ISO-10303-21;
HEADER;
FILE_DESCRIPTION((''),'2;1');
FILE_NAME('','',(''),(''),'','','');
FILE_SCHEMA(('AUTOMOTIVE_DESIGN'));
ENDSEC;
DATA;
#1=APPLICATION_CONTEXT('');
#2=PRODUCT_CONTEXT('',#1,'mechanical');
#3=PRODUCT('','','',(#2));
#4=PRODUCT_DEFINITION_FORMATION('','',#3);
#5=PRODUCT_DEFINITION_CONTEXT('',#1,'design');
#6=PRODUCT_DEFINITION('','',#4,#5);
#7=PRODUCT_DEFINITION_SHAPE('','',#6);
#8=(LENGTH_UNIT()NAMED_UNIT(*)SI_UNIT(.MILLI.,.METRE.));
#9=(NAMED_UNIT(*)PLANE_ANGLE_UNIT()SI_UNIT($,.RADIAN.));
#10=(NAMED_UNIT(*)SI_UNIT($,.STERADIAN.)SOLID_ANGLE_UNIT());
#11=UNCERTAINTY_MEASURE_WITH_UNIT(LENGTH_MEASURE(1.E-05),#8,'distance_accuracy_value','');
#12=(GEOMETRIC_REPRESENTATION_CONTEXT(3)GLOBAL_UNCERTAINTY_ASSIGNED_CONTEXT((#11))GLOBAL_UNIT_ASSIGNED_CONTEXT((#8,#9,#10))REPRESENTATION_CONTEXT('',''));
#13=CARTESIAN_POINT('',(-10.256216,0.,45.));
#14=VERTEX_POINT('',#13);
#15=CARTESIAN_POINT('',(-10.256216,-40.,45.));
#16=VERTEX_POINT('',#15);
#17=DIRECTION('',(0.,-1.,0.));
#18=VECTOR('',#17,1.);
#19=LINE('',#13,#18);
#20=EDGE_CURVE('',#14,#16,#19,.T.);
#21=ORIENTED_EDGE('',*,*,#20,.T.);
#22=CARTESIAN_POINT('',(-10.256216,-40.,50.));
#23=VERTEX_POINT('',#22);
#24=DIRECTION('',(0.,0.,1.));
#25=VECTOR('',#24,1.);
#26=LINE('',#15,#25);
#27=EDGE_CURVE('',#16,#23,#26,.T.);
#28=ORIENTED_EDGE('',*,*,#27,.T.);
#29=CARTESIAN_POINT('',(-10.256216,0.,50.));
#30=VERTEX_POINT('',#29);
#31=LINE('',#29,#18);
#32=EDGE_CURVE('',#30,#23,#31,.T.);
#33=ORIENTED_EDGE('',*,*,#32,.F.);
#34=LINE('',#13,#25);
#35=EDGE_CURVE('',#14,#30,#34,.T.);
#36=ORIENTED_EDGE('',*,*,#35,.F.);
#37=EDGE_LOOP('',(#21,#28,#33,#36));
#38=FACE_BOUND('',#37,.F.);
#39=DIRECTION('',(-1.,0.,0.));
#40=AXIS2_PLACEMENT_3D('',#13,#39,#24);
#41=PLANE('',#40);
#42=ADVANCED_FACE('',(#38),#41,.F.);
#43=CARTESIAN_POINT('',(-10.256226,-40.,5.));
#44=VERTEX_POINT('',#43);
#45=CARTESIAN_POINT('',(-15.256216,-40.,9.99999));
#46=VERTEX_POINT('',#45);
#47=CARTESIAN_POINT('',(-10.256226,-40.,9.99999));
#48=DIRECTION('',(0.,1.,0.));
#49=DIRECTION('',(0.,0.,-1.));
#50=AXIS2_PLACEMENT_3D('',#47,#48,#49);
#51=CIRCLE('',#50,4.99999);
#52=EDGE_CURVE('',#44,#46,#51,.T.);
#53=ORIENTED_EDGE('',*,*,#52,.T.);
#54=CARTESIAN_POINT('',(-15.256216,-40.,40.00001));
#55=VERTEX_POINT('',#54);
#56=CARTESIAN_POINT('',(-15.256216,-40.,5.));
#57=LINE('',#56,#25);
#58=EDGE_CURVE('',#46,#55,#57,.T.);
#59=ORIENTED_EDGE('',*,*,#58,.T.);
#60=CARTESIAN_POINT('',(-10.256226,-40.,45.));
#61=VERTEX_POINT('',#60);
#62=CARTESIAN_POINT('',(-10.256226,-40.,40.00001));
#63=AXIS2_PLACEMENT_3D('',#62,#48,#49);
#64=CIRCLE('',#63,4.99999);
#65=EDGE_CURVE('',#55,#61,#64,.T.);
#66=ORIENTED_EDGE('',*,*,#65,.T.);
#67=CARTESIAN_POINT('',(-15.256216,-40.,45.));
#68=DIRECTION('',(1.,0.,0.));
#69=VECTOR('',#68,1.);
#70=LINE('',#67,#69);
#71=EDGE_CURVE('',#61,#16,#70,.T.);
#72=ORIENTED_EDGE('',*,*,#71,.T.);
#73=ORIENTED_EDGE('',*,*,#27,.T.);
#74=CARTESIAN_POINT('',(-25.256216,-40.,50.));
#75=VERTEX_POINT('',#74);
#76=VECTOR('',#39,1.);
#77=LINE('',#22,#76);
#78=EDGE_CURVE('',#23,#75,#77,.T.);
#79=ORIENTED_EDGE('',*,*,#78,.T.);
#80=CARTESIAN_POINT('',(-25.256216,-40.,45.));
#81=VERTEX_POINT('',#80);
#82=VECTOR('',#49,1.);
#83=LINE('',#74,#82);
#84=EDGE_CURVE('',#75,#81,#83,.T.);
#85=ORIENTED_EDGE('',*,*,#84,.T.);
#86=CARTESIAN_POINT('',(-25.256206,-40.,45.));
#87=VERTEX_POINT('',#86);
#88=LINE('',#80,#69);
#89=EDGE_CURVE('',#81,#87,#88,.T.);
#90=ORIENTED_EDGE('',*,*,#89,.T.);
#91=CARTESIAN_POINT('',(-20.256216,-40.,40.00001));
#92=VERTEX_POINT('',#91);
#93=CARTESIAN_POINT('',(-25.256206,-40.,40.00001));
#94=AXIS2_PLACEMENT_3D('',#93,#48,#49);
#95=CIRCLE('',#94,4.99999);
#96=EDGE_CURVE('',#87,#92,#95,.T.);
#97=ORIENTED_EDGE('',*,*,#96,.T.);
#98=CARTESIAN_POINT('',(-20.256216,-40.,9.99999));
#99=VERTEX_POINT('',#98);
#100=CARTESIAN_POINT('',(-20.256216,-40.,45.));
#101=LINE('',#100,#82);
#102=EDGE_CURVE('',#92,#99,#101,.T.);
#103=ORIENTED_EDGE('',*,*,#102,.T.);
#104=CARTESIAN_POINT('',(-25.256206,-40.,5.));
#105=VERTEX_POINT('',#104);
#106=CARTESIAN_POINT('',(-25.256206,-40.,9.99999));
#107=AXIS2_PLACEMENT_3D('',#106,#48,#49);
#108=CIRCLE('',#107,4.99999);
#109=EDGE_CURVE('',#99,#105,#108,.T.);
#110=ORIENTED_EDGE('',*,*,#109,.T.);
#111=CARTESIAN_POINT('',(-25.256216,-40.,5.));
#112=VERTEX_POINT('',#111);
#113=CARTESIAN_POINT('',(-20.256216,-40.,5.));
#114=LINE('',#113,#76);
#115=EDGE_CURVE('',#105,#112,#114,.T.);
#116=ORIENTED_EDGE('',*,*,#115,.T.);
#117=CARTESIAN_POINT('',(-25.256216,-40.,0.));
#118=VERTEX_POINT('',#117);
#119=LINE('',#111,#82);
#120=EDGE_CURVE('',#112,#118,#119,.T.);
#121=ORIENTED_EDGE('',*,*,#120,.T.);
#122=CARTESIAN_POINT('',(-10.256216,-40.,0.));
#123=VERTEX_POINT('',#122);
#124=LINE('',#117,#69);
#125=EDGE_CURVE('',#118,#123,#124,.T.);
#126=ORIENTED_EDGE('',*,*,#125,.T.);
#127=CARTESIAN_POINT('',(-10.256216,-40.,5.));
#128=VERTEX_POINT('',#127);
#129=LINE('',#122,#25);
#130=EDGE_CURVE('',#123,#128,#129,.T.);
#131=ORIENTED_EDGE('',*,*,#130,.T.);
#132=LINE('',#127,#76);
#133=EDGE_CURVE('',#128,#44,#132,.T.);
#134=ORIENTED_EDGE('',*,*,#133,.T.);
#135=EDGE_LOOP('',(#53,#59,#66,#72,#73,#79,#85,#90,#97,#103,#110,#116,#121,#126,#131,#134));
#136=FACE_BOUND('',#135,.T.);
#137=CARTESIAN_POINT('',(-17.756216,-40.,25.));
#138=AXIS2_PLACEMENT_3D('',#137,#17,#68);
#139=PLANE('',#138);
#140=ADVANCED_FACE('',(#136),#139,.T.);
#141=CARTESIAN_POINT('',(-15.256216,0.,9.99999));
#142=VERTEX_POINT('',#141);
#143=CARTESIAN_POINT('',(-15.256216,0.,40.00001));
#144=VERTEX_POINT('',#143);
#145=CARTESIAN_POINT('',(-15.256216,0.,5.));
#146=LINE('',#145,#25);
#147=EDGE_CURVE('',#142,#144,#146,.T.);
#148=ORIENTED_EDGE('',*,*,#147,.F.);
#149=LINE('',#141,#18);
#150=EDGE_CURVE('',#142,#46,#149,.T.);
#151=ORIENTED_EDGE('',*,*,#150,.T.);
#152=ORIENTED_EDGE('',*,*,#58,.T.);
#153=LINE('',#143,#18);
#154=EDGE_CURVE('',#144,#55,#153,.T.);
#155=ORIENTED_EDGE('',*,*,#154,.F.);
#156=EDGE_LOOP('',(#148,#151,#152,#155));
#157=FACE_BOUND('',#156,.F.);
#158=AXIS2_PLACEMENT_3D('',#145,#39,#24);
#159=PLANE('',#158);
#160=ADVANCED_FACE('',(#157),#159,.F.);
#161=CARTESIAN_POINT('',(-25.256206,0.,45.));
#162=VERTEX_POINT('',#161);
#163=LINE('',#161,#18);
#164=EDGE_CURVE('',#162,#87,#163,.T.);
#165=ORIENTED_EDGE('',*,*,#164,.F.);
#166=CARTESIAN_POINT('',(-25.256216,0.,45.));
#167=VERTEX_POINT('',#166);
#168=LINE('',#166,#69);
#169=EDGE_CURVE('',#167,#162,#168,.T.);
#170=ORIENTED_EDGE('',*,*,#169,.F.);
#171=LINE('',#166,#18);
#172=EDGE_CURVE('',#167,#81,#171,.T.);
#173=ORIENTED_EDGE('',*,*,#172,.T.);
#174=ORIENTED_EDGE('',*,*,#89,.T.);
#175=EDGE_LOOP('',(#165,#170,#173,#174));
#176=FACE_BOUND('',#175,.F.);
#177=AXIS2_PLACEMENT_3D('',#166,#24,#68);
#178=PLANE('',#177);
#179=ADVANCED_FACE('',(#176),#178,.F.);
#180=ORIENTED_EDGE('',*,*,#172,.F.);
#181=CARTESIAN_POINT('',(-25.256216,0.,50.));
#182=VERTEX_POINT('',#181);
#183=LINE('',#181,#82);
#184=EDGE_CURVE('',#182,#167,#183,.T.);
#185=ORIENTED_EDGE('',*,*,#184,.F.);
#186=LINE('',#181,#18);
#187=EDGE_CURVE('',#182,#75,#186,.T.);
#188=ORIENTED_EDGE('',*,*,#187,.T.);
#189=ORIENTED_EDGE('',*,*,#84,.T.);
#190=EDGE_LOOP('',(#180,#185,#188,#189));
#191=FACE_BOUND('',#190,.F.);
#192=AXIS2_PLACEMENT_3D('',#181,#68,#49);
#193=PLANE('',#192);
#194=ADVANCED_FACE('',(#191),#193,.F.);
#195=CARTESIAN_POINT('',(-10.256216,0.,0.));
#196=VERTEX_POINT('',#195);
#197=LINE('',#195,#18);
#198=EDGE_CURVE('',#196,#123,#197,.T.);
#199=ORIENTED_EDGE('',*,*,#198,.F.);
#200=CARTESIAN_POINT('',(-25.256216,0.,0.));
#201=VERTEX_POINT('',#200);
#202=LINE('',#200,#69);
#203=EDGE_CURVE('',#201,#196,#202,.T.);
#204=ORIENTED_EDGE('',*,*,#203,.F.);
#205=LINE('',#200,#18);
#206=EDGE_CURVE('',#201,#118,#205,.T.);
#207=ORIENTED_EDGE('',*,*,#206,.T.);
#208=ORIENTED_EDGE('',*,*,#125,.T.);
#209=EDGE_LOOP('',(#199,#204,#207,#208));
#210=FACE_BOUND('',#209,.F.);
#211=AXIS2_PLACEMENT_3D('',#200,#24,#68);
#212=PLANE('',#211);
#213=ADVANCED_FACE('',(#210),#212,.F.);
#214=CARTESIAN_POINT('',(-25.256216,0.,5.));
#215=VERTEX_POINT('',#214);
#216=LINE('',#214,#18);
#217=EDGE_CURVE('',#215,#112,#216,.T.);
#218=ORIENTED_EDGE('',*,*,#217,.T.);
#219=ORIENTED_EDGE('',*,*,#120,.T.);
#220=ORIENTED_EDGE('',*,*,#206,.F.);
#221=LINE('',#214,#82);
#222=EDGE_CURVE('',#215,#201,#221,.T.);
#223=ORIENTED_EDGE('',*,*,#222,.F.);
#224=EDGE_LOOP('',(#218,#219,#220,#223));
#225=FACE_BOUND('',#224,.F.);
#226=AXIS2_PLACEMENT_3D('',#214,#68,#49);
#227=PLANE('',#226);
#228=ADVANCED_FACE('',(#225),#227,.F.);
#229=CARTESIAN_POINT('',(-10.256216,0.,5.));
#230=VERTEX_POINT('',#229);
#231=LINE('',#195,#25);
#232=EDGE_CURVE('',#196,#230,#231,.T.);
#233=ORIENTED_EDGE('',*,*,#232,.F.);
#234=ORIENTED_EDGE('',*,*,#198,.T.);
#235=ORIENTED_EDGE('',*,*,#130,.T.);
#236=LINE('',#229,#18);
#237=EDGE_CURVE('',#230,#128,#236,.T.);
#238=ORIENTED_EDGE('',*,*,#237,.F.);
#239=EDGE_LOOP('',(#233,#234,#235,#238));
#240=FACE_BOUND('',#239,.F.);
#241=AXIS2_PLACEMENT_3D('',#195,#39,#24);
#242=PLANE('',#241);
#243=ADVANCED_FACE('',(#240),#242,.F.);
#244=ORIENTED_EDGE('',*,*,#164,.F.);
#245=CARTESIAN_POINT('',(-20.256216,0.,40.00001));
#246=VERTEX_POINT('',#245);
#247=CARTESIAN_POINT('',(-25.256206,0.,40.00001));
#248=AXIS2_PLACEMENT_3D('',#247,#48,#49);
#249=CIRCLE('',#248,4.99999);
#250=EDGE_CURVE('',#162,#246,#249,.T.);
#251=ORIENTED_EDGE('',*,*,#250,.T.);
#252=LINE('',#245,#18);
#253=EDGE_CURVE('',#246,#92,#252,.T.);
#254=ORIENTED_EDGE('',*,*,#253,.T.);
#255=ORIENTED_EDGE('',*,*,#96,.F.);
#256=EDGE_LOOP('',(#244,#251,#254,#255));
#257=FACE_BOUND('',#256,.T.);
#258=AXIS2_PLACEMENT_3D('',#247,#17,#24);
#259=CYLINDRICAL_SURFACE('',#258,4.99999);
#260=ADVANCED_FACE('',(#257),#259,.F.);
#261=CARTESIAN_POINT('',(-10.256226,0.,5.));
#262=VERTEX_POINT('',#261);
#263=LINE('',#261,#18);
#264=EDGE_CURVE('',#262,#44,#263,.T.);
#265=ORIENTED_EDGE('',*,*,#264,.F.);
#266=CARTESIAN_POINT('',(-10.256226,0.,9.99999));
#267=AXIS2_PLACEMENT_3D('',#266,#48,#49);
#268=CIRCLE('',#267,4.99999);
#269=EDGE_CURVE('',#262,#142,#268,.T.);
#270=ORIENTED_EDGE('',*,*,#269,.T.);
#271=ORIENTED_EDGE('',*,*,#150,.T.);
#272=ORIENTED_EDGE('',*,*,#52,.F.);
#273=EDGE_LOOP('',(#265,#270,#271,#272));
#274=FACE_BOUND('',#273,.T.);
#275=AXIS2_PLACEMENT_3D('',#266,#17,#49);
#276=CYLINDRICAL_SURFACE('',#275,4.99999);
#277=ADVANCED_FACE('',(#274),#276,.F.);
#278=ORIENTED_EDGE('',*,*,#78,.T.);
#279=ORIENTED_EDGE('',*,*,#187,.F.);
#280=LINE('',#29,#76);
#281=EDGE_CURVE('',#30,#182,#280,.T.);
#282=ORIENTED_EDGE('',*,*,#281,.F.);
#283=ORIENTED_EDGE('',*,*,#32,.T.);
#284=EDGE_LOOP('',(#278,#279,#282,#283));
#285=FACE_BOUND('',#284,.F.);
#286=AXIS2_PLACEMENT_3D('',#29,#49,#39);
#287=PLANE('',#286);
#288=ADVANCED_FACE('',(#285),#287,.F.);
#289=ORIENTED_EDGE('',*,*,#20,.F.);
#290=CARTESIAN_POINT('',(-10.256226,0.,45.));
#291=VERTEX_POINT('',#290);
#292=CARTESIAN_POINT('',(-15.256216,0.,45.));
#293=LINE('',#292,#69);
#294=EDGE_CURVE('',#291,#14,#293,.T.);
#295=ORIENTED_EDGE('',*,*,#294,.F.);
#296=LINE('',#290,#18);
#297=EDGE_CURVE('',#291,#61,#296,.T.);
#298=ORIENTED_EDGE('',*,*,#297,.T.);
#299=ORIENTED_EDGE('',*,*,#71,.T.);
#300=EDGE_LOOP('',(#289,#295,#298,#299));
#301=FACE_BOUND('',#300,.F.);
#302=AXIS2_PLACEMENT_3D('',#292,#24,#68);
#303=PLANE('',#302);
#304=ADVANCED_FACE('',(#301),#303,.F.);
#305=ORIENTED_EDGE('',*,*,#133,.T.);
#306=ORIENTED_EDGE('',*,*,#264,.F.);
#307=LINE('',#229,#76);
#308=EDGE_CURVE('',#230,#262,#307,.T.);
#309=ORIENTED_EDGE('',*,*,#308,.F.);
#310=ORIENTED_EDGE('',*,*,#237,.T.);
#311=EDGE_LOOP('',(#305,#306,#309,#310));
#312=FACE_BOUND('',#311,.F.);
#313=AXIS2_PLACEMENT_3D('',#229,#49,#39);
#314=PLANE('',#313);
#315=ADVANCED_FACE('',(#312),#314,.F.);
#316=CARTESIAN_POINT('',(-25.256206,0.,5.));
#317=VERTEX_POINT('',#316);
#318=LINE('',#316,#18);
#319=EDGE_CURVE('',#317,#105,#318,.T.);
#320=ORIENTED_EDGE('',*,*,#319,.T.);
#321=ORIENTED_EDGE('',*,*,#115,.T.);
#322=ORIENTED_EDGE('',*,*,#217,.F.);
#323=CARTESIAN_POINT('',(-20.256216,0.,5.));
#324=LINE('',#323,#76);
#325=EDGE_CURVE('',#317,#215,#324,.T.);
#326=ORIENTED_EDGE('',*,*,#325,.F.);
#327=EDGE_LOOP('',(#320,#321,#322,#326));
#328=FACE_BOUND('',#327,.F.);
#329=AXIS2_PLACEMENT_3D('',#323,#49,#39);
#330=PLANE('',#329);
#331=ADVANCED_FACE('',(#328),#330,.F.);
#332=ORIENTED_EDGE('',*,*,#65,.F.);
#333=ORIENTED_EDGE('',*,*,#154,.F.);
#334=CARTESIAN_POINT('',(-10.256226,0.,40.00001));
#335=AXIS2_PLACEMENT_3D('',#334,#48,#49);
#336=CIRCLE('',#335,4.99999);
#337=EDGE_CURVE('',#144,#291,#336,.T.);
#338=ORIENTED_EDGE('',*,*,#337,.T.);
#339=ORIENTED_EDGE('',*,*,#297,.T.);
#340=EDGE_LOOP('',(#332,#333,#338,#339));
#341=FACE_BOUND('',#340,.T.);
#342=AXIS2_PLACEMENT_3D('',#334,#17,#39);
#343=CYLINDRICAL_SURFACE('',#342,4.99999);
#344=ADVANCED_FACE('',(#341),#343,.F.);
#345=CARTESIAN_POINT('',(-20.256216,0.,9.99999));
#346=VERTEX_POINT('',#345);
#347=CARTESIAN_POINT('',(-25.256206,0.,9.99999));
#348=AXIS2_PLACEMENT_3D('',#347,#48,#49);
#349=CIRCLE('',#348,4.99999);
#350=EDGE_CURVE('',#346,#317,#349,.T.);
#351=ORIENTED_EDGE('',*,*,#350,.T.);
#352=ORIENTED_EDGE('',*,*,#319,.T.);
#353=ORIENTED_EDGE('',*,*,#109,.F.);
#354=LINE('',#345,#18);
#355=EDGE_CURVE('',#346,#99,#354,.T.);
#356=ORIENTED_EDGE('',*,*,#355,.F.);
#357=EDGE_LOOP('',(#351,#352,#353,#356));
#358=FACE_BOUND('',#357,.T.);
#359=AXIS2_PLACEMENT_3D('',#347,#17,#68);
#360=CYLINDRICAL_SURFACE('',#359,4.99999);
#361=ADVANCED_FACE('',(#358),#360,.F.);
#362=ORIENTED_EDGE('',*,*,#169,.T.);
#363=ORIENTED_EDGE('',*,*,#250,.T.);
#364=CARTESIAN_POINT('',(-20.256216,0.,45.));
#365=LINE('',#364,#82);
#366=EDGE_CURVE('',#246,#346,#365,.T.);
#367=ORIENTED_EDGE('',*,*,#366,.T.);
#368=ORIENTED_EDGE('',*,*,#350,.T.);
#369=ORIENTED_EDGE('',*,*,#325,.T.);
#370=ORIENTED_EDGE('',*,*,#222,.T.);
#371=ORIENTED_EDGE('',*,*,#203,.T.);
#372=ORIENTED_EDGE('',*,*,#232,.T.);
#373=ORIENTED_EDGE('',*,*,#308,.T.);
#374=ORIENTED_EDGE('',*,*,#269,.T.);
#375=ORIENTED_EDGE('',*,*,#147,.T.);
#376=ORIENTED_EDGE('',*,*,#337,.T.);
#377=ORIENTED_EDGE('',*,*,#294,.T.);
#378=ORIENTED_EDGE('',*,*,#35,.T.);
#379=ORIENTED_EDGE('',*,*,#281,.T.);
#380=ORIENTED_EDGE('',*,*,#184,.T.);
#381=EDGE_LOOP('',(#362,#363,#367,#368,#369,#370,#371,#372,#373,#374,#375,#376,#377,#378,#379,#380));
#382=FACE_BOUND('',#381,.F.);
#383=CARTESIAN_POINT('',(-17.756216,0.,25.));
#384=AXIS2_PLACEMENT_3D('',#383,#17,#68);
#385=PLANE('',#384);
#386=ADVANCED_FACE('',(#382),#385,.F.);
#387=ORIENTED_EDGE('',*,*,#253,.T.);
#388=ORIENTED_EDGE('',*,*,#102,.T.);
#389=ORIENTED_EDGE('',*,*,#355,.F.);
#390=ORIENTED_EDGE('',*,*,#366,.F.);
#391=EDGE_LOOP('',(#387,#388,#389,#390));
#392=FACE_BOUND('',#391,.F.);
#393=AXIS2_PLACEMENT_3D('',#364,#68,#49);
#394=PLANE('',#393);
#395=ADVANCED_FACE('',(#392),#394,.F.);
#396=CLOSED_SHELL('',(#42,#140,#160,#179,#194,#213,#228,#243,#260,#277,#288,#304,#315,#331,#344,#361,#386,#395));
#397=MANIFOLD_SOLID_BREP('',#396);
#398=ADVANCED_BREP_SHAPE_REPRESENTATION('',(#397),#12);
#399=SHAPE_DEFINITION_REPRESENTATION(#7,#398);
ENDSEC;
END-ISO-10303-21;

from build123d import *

# Parameters (mm, degrees)
F1_DEPTH = 40
F2_R     = 4.99999


# Not quite as in the source:
# - a fillet or chamfer is up to 0.001 mm smaller than in the source, because OpenCascade refuses the exact size


with BuildPart() as f1:
    # F0 (on Front) → F1 (new body)
    with BuildSketch(Plane.XZ):
        Polygon((-10.2562157065, 50), (-25.2562157065, 50), (-25.2562157065, 45), (-20.2562157065, 45), (-20.2562157065, 5), (-25.2562157065, 5), (-25.2562157065, 0), (-10.2562157065, 0), (-10.2562157065, 5), (-15.2562157065, 5), (-15.2562157065, 45), (-10.2562157065, 45), align=None)
    extrude(amount=F1_DEPTH)

    # F2 (radius 5 in the source; OpenCascade refuses exactly that, so slightly less here)
    f2_edges = [f1.edges().sort_by_distance(p)[0] for p in [
        (-15.256216, -20, 5),
        (-20.256216, -20, 5),
        (-15.256216, -20, 45),
        (-20.256216, -20, 45),
    ]]
    fillet(f2_edges, radius=F2_R)


solid = f1.part
